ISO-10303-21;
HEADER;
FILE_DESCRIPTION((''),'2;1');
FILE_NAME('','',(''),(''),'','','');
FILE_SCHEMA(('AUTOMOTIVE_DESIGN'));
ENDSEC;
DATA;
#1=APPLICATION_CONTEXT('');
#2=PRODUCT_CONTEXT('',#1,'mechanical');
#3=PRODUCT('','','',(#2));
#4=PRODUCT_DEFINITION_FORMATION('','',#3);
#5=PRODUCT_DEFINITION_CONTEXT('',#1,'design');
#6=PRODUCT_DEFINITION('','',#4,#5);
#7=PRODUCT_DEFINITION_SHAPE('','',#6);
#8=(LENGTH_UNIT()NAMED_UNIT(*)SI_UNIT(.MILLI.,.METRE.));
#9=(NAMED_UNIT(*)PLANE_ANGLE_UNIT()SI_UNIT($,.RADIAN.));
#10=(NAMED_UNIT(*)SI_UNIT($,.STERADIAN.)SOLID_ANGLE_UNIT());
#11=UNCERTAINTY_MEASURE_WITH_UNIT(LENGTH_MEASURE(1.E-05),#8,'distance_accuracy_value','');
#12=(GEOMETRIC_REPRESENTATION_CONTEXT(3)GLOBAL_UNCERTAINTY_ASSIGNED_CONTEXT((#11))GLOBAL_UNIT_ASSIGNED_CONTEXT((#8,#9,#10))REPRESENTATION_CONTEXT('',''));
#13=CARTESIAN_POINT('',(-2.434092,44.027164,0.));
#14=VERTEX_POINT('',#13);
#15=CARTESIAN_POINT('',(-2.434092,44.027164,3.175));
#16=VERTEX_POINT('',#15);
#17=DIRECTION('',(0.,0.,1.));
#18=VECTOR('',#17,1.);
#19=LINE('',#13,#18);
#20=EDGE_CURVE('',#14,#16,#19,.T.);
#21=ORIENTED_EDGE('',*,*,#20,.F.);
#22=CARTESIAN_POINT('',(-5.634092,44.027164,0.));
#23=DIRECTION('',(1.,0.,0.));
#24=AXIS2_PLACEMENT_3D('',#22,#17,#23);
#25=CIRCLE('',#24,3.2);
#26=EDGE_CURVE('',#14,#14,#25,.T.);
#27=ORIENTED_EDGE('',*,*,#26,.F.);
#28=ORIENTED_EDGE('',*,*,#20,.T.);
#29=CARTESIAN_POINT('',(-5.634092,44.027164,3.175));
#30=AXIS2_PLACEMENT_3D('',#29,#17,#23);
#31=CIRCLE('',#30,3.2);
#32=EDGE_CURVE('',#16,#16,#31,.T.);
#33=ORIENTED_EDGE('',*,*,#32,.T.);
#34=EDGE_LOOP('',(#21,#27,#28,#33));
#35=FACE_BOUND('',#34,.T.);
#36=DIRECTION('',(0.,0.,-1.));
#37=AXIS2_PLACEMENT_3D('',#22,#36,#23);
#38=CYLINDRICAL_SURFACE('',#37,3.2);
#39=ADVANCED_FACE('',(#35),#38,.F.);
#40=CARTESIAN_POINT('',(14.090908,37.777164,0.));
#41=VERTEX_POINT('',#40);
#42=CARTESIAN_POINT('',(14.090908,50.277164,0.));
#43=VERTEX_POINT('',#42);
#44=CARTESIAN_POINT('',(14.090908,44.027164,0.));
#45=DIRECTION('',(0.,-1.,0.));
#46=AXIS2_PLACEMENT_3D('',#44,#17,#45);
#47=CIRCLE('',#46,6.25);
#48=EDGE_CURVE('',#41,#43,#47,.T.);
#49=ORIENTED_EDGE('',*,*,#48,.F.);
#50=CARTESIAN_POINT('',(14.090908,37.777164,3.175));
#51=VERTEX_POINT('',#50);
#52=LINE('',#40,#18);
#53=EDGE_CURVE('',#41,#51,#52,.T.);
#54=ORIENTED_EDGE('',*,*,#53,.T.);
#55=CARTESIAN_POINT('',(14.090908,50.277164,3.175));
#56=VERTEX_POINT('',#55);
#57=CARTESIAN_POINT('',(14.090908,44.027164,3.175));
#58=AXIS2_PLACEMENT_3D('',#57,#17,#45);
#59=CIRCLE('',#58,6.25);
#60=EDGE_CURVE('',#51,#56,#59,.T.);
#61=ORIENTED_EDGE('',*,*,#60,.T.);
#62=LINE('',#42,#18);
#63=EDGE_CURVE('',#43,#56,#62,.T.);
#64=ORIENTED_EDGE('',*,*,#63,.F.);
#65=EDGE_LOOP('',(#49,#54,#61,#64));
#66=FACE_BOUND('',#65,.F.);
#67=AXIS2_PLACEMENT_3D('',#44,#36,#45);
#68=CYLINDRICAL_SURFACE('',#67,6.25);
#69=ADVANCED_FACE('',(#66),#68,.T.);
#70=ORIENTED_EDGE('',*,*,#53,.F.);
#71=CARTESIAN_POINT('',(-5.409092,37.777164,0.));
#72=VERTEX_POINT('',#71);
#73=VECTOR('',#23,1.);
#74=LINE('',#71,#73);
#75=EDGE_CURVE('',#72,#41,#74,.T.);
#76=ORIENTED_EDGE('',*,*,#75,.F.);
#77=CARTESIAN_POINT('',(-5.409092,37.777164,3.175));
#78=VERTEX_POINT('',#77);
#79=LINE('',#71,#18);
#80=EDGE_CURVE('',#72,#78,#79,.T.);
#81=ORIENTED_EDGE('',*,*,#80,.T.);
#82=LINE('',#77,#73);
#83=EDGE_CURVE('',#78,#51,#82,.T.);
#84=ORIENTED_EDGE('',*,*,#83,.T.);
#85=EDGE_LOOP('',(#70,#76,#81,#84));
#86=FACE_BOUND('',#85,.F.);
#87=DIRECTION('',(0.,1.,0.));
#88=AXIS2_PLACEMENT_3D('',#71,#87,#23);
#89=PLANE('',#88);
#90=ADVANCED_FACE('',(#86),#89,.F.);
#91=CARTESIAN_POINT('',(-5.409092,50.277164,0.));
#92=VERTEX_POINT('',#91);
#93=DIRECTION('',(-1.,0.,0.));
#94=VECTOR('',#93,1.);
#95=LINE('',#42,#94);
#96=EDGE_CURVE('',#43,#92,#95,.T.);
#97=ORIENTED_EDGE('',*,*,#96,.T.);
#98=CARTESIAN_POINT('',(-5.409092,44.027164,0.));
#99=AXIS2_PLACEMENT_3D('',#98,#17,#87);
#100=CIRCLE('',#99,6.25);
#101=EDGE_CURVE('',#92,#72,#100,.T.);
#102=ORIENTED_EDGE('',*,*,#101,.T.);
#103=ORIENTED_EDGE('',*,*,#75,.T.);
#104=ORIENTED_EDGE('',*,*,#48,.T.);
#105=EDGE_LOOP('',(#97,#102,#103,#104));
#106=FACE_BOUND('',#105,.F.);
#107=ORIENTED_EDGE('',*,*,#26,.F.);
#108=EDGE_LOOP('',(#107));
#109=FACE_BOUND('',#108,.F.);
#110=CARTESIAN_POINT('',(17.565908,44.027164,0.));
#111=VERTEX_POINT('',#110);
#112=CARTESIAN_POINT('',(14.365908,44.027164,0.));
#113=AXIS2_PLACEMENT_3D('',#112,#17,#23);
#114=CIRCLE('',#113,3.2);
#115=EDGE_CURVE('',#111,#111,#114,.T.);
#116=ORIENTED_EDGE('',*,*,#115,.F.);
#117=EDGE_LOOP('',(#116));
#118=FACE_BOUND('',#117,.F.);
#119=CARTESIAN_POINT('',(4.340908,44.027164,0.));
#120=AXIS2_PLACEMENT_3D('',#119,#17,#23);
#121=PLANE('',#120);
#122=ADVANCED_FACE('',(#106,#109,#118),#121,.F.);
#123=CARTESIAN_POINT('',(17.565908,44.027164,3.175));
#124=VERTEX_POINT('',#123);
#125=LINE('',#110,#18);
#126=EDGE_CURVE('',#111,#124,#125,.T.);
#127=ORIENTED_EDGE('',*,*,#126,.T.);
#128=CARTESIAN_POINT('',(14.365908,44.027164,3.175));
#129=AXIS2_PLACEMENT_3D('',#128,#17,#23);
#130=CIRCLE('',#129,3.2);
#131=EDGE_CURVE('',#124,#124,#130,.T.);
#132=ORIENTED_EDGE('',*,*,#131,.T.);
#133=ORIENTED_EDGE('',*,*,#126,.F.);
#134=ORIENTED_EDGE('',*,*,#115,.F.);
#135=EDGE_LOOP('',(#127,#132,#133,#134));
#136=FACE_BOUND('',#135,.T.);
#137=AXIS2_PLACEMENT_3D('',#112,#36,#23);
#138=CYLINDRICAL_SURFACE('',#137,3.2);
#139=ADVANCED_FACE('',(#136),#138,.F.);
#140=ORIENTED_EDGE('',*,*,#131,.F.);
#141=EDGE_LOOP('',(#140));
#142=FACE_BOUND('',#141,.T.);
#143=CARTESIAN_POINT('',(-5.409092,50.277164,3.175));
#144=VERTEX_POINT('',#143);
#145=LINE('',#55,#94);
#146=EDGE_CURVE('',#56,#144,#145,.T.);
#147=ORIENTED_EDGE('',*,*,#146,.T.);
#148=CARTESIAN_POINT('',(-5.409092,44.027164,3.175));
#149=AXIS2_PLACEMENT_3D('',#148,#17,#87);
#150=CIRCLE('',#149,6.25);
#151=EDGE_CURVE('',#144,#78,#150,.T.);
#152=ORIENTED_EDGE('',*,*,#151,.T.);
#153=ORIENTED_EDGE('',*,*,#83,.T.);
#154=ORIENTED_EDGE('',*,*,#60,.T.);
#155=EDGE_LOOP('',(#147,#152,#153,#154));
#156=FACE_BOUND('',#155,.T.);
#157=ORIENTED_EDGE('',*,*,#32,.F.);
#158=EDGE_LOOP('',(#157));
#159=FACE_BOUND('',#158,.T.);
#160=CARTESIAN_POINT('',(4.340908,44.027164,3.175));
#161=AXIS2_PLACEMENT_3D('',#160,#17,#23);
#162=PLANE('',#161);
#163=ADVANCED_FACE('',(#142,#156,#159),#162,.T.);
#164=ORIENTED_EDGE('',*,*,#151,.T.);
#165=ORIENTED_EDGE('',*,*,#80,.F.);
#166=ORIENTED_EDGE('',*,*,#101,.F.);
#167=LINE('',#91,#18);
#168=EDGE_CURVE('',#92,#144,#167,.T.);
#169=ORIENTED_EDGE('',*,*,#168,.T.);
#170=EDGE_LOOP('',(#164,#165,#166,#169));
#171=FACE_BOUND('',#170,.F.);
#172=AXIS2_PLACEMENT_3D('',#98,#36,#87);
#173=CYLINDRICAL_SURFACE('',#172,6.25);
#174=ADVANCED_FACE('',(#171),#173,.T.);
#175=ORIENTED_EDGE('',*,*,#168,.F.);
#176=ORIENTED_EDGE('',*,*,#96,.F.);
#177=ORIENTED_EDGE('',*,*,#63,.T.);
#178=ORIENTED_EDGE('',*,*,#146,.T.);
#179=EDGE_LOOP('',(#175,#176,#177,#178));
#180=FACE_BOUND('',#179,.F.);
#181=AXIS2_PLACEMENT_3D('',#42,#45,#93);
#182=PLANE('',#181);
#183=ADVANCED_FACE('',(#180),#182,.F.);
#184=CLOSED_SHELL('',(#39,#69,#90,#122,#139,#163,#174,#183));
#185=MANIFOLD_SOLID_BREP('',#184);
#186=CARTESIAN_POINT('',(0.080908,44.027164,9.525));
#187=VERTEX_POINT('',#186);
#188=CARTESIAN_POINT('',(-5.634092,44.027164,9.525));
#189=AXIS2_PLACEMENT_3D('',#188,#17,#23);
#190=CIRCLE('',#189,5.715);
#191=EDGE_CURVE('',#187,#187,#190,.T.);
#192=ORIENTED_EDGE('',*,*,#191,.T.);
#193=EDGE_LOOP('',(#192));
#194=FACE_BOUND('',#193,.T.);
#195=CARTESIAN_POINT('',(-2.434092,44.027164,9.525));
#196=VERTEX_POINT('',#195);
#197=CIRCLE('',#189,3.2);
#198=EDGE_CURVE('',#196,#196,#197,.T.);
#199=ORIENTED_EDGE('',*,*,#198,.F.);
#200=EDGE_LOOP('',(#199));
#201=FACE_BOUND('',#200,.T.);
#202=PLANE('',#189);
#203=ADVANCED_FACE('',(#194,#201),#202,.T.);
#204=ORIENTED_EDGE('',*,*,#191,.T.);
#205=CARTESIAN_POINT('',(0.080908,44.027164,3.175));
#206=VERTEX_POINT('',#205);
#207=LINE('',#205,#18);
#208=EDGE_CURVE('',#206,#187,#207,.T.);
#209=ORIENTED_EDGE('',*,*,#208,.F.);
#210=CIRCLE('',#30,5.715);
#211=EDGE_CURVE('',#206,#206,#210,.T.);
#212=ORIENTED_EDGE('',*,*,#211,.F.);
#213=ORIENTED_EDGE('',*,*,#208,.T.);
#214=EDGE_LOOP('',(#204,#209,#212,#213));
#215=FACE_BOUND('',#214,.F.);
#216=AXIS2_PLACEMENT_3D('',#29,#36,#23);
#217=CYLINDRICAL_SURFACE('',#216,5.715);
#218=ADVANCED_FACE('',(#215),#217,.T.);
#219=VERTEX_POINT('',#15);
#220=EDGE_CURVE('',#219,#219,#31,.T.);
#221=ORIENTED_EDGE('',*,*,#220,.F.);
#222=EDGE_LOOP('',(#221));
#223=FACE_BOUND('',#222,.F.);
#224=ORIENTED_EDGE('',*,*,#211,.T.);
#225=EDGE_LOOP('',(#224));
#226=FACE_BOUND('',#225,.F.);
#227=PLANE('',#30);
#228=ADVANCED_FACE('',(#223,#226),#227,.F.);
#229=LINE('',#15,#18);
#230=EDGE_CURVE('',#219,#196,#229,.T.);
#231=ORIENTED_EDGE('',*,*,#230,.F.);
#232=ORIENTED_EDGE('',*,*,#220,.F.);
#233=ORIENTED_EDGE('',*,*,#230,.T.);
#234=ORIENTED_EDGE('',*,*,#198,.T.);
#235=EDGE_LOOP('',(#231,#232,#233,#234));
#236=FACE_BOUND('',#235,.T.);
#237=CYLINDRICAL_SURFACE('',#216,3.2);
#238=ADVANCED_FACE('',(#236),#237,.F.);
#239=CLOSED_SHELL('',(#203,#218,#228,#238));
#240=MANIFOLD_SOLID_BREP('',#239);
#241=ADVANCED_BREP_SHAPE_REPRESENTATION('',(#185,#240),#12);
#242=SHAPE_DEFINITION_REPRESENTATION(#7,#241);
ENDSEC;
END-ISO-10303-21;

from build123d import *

# Parameters (mm, degrees)
F0_R     = 3.2
F1_DEPTH = 3.175
F2_R     = 5.715
F2_R_2   = 3.2
F3_DEPTH = 6.35


# Not quite as in the source:
# - a length typed as a fraction of an inch, garbled in the dataset ("3 / 203.2 mm" for 3/8 in), is restored


with BuildPart() as f1:
    # F0 (on Top) → F1 (new body)
    with BuildSketch(Plane.XY):
        with BuildLine():
            ThreePointArc((-5.4090924263, 50.2771637037), (-11.6590924263, 44.0271637037), (-5.4090924263, 37.7771637037))
            Line((-5.4090924263, 37.7771637037), (14.0909075737, 37.7771637037))
            ThreePointArc((14.0909075737, 37.7771637037), (20.3409075737, 44.0271637037), (14.0909075737, 50.2771637037))
            Line((14.0909075737, 50.2771637037), (-5.4090924263, 50.2771637037))
        make_face()
        with Locations((-5.6340924263, 44.0271637037)):
            Circle(F0_R, mode=Mode.SUBTRACT)
        with Locations((14.3659075737, 44.0271637037)):
            Circle(F0_R, mode=Mode.SUBTRACT)
    extrude(amount=F1_DEPTH)


with BuildPart() as f3:
    # F2 (on face) → F3 (new body)
    with BuildSketch(Plane.XY.offset(3.175)):
        with Locations((-5.6340924263, 44.0271637037)):
            Circle(F2_R)
        with Locations((-5.6340924263, 44.0271637037)):
            Circle(F2_R_2, mode=Mode.SUBTRACT)
    extrude(amount=F3_DEPTH)


solid = Compound([f1.part, f3.part])
